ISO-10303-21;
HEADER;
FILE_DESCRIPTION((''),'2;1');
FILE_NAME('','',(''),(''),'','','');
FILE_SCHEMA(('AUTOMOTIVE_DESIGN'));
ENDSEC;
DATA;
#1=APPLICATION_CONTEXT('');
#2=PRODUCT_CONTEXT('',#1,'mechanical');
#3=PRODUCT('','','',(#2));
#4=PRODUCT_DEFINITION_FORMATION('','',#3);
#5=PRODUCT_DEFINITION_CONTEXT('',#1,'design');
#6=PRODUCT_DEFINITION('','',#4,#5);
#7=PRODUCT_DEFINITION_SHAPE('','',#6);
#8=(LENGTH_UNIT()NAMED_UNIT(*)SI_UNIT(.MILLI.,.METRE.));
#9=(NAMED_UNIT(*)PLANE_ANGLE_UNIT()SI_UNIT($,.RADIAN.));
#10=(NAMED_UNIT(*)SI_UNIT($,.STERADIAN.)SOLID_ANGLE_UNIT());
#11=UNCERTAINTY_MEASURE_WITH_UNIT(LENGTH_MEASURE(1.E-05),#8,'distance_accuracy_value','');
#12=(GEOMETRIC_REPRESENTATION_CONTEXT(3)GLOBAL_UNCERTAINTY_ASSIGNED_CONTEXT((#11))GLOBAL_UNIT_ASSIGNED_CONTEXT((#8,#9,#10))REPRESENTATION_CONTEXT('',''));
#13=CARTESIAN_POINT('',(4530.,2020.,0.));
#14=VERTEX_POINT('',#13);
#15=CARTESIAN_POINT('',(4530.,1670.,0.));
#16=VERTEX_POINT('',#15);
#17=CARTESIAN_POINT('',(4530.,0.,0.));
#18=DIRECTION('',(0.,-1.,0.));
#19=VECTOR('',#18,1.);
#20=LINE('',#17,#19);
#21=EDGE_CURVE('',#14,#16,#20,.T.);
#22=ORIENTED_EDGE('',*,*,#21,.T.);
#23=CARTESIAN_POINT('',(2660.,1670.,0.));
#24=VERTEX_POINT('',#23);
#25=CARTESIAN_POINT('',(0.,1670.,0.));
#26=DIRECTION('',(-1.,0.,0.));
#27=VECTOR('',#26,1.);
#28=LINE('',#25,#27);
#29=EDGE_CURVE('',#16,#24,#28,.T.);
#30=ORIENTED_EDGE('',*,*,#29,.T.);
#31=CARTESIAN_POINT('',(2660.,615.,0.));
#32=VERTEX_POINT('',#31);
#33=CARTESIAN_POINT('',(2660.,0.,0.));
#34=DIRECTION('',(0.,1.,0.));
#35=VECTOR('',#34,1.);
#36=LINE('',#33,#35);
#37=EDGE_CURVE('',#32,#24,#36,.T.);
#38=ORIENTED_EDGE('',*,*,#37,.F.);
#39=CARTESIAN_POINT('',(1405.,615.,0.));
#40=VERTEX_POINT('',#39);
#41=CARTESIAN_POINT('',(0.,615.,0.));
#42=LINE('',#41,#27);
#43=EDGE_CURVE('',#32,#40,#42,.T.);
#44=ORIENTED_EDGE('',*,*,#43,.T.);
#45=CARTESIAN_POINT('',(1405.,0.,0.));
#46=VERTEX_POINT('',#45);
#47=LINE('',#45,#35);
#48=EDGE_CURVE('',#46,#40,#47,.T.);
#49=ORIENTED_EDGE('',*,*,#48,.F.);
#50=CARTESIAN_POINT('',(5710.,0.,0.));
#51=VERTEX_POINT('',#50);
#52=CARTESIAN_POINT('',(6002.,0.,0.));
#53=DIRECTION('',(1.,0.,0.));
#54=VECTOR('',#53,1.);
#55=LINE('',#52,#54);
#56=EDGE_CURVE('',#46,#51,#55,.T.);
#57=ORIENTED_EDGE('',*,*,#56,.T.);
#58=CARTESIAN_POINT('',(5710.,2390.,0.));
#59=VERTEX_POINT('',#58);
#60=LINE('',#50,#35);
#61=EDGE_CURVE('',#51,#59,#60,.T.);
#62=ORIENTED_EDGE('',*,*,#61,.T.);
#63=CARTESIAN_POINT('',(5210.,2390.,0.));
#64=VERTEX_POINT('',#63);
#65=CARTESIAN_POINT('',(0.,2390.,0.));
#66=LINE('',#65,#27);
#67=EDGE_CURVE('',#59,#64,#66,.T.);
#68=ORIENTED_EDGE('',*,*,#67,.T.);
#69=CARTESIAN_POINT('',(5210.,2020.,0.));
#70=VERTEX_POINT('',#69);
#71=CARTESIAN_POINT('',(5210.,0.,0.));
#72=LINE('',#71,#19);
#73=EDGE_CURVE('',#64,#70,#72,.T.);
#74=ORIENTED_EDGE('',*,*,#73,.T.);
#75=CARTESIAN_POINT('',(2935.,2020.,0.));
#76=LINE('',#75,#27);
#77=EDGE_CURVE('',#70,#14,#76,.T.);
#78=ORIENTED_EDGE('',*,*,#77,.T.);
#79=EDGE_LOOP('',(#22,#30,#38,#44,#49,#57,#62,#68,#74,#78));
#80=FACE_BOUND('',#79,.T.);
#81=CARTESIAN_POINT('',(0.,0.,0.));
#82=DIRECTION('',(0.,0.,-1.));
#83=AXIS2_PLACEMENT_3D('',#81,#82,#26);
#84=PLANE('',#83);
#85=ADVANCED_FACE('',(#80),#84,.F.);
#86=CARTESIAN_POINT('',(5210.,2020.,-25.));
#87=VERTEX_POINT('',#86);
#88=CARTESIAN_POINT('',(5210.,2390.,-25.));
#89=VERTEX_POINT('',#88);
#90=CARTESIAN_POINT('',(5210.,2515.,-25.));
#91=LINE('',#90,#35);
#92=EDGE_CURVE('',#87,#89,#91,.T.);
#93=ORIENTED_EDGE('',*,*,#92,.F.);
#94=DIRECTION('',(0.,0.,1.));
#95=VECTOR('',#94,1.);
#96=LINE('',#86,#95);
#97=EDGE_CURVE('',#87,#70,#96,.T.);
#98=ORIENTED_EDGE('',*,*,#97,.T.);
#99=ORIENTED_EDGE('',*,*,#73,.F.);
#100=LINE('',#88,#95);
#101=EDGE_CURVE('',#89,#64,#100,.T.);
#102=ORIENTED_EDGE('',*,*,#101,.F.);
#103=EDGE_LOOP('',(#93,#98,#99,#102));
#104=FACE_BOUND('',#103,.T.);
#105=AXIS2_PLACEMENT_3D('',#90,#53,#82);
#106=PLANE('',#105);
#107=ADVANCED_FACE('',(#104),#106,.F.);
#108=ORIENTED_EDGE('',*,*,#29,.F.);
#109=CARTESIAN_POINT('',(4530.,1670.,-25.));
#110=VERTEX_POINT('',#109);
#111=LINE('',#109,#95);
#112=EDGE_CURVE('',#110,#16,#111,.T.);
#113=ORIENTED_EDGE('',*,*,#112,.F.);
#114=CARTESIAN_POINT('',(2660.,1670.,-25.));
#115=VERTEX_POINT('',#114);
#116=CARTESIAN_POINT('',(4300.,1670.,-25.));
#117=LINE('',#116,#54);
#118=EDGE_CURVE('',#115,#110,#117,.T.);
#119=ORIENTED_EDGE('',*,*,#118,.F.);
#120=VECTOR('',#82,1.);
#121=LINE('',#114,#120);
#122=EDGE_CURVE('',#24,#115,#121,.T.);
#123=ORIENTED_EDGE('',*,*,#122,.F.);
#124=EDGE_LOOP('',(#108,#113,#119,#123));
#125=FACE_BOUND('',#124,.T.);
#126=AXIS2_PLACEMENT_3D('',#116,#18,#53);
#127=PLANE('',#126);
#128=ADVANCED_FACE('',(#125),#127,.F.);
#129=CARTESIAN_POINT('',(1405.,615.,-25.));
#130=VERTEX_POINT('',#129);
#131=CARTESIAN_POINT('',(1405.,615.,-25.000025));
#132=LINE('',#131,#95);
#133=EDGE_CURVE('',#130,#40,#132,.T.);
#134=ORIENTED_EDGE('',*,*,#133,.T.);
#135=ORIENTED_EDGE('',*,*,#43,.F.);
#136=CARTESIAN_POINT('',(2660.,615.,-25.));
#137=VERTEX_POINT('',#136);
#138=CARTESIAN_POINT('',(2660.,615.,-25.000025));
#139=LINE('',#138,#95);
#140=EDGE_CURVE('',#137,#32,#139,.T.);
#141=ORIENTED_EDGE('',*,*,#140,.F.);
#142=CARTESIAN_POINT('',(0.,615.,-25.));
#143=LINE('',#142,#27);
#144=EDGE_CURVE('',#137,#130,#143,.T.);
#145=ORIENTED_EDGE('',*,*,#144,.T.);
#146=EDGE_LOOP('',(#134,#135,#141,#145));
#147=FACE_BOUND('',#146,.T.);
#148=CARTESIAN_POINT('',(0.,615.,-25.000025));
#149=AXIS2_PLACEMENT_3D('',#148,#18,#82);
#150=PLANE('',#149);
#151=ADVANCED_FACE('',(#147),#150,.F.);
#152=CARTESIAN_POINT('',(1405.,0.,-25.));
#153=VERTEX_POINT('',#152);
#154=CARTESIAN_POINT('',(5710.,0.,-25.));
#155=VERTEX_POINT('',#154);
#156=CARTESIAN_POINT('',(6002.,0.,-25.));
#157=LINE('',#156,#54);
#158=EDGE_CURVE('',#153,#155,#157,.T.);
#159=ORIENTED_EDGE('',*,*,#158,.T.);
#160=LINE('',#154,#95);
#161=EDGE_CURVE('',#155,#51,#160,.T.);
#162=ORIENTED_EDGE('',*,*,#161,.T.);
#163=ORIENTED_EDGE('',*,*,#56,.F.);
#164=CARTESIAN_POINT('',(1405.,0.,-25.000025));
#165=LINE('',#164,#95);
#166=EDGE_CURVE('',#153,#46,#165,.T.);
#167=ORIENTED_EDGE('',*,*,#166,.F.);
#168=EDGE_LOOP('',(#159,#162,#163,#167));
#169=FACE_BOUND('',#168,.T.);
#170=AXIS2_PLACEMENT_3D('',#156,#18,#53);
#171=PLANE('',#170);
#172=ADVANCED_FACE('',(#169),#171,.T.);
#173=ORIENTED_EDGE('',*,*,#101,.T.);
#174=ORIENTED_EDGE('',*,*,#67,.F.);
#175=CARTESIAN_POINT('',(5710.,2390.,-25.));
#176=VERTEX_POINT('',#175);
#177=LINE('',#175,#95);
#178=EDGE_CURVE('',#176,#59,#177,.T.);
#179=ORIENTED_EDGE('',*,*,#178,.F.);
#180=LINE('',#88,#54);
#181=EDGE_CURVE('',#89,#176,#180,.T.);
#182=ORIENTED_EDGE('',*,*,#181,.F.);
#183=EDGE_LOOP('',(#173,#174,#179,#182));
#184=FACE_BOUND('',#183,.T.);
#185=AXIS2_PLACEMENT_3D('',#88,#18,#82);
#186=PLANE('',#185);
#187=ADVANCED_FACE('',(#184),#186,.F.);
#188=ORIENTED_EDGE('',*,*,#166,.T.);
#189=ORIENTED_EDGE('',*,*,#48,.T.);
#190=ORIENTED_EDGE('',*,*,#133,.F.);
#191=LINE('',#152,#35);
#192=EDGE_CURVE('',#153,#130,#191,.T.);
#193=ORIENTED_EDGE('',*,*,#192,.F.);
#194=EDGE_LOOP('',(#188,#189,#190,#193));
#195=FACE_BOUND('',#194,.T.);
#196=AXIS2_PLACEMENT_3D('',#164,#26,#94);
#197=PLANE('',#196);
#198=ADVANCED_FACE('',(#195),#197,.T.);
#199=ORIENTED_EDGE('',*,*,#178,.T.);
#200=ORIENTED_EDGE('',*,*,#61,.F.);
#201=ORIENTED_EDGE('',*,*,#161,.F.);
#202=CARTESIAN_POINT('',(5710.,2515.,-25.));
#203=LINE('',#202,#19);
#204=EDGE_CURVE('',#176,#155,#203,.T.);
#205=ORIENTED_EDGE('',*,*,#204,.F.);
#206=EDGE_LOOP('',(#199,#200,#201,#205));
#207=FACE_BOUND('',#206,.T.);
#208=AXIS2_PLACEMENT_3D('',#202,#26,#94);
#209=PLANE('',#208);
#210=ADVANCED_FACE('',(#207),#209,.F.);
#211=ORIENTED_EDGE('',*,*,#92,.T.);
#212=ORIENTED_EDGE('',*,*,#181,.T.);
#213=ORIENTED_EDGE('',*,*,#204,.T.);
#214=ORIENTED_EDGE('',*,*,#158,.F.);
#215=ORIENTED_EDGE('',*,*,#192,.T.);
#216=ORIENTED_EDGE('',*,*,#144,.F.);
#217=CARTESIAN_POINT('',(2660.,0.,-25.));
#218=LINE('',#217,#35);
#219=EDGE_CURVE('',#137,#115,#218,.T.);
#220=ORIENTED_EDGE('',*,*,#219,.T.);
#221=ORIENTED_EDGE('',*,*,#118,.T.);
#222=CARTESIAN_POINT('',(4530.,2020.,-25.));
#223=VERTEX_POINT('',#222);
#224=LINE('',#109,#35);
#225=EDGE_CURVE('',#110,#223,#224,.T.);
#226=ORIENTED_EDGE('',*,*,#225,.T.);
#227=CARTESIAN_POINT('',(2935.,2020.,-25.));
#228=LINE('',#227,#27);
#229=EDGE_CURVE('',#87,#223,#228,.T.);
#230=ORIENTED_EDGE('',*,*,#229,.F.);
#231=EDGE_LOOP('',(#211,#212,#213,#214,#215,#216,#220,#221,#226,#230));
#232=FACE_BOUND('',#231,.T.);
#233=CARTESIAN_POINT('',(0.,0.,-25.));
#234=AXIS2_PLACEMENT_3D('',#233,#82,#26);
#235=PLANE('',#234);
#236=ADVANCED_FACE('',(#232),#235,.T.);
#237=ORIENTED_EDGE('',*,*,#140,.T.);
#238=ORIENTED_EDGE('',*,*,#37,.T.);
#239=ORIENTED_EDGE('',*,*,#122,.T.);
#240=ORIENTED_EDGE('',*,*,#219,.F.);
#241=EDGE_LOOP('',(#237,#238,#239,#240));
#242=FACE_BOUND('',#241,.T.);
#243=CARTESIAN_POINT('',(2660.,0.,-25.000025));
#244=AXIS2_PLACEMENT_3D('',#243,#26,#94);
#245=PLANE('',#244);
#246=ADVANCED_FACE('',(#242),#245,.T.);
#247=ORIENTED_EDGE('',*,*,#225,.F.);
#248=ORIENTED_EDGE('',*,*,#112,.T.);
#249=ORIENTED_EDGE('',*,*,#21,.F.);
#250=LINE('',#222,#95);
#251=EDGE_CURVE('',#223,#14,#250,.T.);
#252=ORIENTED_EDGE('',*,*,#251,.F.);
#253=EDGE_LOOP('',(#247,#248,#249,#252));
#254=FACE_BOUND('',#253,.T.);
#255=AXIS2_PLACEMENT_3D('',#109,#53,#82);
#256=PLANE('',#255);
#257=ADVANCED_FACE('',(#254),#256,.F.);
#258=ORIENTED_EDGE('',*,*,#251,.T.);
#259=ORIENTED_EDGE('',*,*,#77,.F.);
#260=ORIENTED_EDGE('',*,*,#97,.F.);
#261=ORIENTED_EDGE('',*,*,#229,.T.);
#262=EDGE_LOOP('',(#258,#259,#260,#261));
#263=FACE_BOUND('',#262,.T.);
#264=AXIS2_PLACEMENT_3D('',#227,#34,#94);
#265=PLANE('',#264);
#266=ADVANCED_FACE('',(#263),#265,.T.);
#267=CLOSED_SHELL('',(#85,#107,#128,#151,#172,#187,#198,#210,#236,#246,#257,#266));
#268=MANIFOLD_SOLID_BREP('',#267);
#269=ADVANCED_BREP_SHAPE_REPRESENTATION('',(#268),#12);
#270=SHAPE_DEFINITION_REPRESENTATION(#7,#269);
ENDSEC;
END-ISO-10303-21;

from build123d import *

# Parameters (mm, degrees)
TABAN_FLAN_1_DEPTH         = 25
KES_EKSTR_ZYON1_DEPTH      = 6508.676543898
KES_EKSTR_ZYON1_DEPTH_BACK = 6508.676543898
IZIM7_W                    = 1400
IZIM7_H                    = 1895
IZIM7_W_2                  = 310
IZIM7_H_2                  = 495
KES_EKSTR_ZYON2_DEPTH      = 6508.676543898
KES_EKSTR_ZYON2_DEPTH_BACK = 6508.676543898
IZIM8_W                    = 292
IZIM8_H                    = 2515
KES_EKSTR_ZYON3_DEPTH      = 6240.38698912
KES_EKSTR_ZYON3_DEPTH_BACK = 6240.38698912
IZIM10_W                   = 2900
IZIM10_H                   = 350
KES_EKSTR_ZYON4_DEPTH      = 6240.38698912
KES_EKSTR_ZYON4_DEPTH_BACK = 6240.38698912
KES_EKSTR_ZYON5_DEPTH      = 6191.05856192
KES_EKSTR_ZYON5_DEPTH_BACK = 6191.05856192
IZIM12_W                   = 5
IZIM12_H                   = 615


# Sheet-metal steps are written as plain solids
with BuildPart() as part:
    # Çizim1 → Taban-Flanş1 (new body)
    with BuildSketch(Plane.XY):
        Polygon((0, 0), (0, 1895), (2935, 1895), (2935, 2020), (4900, 2020), (4900, 2515), (6002, 2515), (6002, 0), align=None)
    extrude(amount=-TABAN_FLAN_1_DEPTH)

    # Çizim7 → Kes-Ekstrüzyon1 (cut, two sides: drawn at the far end of the back side and taken through both)
    with BuildSketch(Plane.XY.offset(-KES_EKSTR_ZYON1_DEPTH_BACK)):
        with Locations((700, 947.5)):
            Rectangle(IZIM7_W, IZIM7_H)
        with Locations((5055, 2267.5)):
            Rectangle(IZIM7_W_2, IZIM7_H_2)
    extrude(amount=KES_EKSTR_ZYON1_DEPTH + KES_EKSTR_ZYON1_DEPTH_BACK, mode=Mode.SUBTRACT)

    # Çizim8 → Kes-Ekstrüzyon2 (cut, two sides: drawn at the far end of the back side and taken through both)
    with BuildSketch(Plane.XY.offset(-KES_EKSTR_ZYON2_DEPTH_BACK)):
        with Locations((5856, 1257.5)):
            Rectangle(IZIM8_W, IZIM8_H)
    extrude(amount=KES_EKSTR_ZYON2_DEPTH + KES_EKSTR_ZYON2_DEPTH_BACK, mode=Mode.SUBTRACT)

    # Çizim10 → Kes-Ekstrüzyon3 (cut, two sides: drawn at the far end of the back side and taken through both)
    with BuildSketch(Plane.XY.offset(-KES_EKSTR_ZYON3_DEPTH_BACK)):
        with Locations((2850, 1845)):
            Rectangle(IZIM10_W, IZIM10_H)
    extrude(amount=KES_EKSTR_ZYON3_DEPTH + KES_EKSTR_ZYON3_DEPTH_BACK, mode=Mode.SUBTRACT)

    # Çizim11 → Kes-Ekstrüzyon4 (cut, two sides: drawn at the far end of the back side and taken through both)
    with BuildSketch(Plane.XY.offset(-KES_EKSTR_ZYON4_DEPTH_BACK)):
        Polygon((4300, 1670), (4530, 1670), (4530, 2020), (5210, 2020), (5210, 2390), (5710, 2390), (5778.630385148, 2406.496682207), (5749.815338653, 2697.266696836), (5189.231706845, 2697.266696836), (4530, 2199.552257381), (4300, 2199.552257381), align=None)
    extrude(amount=KES_EKSTR_ZYON4_DEPTH + KES_EKSTR_ZYON4_DEPTH_BACK, mode=Mode.SUBTRACT)

    # Çizim12 → Kes-Ekstrüzyon5 (cut, two sides: drawn at the far end of the back side and taken through both)
    with BuildSketch(Plane.XY.offset(-KES_EKSTR_ZYON5_DEPTH_BACK)):
        Polygon((2660, 1670), (1400, 1670), (1400, 615), (1405, 615), (2660, 615), align=None)
        with Locations((1402.5, 307.5)):
            Rectangle(IZIM12_W, IZIM12_H)
    extrude(amount=KES_EKSTR_ZYON5_DEPTH + KES_EKSTR_ZYON5_DEPTH_BACK, mode=Mode.SUBTRACT)


solid = part.part
